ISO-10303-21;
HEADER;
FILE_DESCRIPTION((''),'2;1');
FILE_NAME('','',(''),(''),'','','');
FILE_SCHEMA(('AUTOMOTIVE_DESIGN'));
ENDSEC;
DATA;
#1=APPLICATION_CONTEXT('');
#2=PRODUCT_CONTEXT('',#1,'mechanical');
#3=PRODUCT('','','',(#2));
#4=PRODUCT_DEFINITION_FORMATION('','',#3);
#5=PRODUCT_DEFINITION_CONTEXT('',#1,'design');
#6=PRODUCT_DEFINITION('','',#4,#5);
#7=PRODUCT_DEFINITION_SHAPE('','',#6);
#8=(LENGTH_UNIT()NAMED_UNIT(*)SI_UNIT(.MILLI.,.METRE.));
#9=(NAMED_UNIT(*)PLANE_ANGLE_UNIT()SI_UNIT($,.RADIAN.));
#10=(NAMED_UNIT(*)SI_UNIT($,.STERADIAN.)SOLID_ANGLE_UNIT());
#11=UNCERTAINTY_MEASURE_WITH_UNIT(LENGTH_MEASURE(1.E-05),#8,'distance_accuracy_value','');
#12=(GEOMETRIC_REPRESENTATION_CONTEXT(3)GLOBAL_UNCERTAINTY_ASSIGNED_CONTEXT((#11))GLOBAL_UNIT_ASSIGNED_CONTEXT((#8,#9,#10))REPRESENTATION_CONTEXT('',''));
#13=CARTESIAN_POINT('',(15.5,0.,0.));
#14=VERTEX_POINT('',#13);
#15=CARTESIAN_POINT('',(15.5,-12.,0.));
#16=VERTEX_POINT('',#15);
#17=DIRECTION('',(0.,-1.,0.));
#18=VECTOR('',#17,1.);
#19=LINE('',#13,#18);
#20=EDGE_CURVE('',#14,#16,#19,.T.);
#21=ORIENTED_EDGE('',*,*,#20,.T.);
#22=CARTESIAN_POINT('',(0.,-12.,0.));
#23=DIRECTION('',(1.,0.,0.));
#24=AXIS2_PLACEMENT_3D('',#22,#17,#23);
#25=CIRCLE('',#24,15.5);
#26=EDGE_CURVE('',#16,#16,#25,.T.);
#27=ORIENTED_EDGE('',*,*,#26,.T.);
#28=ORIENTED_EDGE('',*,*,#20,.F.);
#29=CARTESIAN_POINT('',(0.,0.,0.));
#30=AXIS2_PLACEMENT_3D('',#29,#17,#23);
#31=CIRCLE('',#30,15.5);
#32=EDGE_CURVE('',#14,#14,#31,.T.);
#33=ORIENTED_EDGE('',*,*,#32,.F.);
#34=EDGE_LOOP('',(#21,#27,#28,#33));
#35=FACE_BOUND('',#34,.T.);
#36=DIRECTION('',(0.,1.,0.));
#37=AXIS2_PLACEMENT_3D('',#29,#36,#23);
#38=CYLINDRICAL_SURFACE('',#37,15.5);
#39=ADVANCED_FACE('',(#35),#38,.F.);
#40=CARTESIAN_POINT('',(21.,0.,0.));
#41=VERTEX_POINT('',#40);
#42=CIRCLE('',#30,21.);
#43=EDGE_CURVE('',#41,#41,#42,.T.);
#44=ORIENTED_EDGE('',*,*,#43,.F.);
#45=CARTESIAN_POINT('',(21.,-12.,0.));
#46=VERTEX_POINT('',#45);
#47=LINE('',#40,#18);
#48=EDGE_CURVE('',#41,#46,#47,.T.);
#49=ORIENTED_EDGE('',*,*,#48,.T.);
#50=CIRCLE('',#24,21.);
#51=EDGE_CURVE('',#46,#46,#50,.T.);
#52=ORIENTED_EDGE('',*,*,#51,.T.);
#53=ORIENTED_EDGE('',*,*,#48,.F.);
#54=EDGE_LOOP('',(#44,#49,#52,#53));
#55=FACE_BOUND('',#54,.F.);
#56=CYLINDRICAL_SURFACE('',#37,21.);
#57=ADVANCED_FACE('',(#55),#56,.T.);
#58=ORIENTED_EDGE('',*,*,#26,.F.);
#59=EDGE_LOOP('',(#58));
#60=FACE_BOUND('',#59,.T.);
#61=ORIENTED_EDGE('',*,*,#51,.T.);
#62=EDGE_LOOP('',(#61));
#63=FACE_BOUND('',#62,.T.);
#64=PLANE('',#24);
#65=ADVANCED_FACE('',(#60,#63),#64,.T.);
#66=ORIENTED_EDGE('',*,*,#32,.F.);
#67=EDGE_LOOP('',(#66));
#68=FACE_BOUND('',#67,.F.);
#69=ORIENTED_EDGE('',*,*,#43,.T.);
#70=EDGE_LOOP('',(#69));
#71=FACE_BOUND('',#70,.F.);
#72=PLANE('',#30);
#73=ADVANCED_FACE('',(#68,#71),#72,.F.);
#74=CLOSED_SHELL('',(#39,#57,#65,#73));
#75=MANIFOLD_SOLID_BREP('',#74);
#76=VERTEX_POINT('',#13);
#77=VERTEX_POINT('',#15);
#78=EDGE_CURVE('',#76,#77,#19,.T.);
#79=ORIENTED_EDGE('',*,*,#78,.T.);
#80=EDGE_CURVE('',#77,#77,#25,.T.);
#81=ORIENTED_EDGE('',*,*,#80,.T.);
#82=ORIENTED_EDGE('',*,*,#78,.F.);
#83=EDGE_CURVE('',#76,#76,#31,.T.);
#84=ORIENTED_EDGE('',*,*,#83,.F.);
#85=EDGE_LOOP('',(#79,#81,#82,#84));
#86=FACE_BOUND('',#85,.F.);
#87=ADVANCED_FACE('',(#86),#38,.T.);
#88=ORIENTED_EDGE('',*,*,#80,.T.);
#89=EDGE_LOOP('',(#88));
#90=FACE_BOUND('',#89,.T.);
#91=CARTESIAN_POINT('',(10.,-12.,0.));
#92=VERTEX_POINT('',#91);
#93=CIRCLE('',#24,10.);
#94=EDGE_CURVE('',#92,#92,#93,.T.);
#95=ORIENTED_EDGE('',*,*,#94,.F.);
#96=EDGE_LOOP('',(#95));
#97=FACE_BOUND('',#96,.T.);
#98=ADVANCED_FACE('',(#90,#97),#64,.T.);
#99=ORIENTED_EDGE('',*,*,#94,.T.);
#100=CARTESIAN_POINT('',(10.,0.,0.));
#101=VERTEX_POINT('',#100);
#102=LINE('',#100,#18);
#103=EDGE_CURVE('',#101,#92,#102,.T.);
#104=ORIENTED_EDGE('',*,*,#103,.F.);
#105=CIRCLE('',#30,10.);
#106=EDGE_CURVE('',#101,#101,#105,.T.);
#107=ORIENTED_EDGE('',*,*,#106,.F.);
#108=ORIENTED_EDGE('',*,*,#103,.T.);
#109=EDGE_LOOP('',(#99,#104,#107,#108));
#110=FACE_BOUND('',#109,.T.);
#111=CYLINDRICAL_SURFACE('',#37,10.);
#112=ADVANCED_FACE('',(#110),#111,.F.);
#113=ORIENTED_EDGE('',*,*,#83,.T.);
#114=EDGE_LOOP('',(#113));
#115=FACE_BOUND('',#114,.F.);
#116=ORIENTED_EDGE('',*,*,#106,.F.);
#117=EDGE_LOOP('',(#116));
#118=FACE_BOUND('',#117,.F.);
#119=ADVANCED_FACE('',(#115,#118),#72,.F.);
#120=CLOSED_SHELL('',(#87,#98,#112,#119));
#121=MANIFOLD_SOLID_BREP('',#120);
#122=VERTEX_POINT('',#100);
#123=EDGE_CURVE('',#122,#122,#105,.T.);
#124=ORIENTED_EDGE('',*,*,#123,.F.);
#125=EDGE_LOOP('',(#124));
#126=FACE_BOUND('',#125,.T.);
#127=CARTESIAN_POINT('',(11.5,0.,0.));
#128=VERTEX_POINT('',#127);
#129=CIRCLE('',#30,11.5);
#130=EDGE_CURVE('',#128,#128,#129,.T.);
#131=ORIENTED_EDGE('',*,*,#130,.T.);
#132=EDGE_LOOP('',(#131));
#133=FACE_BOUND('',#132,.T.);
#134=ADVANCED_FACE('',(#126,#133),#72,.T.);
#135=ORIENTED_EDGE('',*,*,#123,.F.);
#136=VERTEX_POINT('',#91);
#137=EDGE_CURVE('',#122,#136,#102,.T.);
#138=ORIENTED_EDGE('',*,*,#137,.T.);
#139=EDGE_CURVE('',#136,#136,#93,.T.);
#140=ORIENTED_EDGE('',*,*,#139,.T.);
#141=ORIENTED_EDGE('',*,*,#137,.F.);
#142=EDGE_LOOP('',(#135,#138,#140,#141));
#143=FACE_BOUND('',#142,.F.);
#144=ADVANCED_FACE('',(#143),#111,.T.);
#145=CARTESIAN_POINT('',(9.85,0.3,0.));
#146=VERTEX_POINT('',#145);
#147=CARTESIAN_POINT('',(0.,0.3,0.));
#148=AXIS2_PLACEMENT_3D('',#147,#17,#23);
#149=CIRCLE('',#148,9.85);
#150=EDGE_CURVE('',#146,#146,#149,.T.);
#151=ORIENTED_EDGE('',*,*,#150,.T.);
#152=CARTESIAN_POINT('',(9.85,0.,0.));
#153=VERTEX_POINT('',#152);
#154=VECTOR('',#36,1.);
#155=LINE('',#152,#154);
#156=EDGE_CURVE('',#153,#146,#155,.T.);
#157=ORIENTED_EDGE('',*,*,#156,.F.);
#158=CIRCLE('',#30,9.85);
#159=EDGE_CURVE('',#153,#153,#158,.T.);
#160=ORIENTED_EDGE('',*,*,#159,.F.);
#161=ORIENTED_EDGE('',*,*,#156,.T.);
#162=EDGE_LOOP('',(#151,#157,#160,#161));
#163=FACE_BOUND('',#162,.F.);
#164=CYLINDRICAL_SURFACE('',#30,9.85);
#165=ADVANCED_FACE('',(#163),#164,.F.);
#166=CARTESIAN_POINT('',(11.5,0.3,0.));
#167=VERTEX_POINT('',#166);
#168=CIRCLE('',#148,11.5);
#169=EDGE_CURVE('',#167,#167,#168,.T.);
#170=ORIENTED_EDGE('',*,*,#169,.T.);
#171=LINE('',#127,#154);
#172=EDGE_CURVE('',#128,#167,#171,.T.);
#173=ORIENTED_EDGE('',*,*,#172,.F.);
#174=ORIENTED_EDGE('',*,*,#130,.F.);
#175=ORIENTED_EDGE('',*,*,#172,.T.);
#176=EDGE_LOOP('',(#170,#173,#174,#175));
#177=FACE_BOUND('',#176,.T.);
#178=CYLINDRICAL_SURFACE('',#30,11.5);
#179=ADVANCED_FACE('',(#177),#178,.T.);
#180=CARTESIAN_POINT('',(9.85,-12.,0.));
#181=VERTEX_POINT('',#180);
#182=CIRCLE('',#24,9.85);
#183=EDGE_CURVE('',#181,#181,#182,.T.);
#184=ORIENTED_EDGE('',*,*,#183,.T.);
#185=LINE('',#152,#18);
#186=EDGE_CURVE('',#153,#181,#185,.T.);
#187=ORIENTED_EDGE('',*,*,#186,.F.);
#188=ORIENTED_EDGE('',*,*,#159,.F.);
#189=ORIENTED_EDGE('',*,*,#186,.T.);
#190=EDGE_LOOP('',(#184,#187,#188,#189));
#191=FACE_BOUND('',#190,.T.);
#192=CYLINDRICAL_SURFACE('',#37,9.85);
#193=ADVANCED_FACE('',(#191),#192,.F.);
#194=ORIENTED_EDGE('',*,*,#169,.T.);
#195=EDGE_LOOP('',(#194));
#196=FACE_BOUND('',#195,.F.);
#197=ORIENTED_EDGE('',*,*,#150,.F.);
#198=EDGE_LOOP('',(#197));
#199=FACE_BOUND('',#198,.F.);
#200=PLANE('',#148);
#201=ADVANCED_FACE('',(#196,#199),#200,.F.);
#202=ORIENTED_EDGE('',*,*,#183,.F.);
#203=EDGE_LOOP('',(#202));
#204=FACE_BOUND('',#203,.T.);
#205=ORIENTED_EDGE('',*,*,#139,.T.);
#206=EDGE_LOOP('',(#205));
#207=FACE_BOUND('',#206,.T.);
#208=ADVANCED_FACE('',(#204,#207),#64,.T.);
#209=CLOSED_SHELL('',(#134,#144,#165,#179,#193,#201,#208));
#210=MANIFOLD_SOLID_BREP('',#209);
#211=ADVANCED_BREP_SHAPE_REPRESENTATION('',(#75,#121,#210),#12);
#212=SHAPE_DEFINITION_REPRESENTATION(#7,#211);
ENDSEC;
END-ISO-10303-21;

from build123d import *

# Parameters (mm, degrees)
F0_R     = 21
F0_R_2   = 15.5
F1_DEPTH = 12
F0_R_3   = 10
F2_DEPTH = 12
F3_R     = 10
F3_R_2   = 9.85
F4_DEPTH = 12
F3_R_3   = 11.5
F5_DEPTH = 0.3
F6_DEPTH = 25


with BuildPart() as f1:
    # F0 (on Front) → F1 (new body)
    with BuildSketch(Plane.XZ):
        Circle(F0_R)
        Circle(F0_R_2, mode=Mode.SUBTRACT)
    extrude(amount=F1_DEPTH)


with BuildPart() as f2:
    # F0 (on Front) → F2 (new body)
    with BuildSketch(Plane.XZ):
        Circle(F0_R_2)
        Circle(F0_R_3, mode=Mode.SUBTRACT)
    extrude(amount=F2_DEPTH)


with BuildPart() as f4:
    # F3 (on Front) → F4 (new body)
    with BuildSketch(Plane.XZ):
        Circle(F3_R)
        Circle(F3_R_2, mode=Mode.SUBTRACT)
    extrude(amount=F4_DEPTH)

    # F3 (on Front) → F5 (join)
    with BuildSketch(Plane.XZ):
        Circle(F3_R_3)
        Circle(F3_R, mode=Mode.SUBTRACT)
        Circle(F3_R)
        Circle(F3_R_2, mode=Mode.SUBTRACT)
        Circle(F3_R_2)
    extrude(amount=-F5_DEPTH)

    # F3 (on Front) → F6 (cut)
    with BuildSketch(Plane.XZ):
        Circle(F3_R_2)
    extrude(amount=-F6_DEPTH, mode=Mode.SUBTRACT)


solid = Compound([f1.part, f2.part, f4.part])
